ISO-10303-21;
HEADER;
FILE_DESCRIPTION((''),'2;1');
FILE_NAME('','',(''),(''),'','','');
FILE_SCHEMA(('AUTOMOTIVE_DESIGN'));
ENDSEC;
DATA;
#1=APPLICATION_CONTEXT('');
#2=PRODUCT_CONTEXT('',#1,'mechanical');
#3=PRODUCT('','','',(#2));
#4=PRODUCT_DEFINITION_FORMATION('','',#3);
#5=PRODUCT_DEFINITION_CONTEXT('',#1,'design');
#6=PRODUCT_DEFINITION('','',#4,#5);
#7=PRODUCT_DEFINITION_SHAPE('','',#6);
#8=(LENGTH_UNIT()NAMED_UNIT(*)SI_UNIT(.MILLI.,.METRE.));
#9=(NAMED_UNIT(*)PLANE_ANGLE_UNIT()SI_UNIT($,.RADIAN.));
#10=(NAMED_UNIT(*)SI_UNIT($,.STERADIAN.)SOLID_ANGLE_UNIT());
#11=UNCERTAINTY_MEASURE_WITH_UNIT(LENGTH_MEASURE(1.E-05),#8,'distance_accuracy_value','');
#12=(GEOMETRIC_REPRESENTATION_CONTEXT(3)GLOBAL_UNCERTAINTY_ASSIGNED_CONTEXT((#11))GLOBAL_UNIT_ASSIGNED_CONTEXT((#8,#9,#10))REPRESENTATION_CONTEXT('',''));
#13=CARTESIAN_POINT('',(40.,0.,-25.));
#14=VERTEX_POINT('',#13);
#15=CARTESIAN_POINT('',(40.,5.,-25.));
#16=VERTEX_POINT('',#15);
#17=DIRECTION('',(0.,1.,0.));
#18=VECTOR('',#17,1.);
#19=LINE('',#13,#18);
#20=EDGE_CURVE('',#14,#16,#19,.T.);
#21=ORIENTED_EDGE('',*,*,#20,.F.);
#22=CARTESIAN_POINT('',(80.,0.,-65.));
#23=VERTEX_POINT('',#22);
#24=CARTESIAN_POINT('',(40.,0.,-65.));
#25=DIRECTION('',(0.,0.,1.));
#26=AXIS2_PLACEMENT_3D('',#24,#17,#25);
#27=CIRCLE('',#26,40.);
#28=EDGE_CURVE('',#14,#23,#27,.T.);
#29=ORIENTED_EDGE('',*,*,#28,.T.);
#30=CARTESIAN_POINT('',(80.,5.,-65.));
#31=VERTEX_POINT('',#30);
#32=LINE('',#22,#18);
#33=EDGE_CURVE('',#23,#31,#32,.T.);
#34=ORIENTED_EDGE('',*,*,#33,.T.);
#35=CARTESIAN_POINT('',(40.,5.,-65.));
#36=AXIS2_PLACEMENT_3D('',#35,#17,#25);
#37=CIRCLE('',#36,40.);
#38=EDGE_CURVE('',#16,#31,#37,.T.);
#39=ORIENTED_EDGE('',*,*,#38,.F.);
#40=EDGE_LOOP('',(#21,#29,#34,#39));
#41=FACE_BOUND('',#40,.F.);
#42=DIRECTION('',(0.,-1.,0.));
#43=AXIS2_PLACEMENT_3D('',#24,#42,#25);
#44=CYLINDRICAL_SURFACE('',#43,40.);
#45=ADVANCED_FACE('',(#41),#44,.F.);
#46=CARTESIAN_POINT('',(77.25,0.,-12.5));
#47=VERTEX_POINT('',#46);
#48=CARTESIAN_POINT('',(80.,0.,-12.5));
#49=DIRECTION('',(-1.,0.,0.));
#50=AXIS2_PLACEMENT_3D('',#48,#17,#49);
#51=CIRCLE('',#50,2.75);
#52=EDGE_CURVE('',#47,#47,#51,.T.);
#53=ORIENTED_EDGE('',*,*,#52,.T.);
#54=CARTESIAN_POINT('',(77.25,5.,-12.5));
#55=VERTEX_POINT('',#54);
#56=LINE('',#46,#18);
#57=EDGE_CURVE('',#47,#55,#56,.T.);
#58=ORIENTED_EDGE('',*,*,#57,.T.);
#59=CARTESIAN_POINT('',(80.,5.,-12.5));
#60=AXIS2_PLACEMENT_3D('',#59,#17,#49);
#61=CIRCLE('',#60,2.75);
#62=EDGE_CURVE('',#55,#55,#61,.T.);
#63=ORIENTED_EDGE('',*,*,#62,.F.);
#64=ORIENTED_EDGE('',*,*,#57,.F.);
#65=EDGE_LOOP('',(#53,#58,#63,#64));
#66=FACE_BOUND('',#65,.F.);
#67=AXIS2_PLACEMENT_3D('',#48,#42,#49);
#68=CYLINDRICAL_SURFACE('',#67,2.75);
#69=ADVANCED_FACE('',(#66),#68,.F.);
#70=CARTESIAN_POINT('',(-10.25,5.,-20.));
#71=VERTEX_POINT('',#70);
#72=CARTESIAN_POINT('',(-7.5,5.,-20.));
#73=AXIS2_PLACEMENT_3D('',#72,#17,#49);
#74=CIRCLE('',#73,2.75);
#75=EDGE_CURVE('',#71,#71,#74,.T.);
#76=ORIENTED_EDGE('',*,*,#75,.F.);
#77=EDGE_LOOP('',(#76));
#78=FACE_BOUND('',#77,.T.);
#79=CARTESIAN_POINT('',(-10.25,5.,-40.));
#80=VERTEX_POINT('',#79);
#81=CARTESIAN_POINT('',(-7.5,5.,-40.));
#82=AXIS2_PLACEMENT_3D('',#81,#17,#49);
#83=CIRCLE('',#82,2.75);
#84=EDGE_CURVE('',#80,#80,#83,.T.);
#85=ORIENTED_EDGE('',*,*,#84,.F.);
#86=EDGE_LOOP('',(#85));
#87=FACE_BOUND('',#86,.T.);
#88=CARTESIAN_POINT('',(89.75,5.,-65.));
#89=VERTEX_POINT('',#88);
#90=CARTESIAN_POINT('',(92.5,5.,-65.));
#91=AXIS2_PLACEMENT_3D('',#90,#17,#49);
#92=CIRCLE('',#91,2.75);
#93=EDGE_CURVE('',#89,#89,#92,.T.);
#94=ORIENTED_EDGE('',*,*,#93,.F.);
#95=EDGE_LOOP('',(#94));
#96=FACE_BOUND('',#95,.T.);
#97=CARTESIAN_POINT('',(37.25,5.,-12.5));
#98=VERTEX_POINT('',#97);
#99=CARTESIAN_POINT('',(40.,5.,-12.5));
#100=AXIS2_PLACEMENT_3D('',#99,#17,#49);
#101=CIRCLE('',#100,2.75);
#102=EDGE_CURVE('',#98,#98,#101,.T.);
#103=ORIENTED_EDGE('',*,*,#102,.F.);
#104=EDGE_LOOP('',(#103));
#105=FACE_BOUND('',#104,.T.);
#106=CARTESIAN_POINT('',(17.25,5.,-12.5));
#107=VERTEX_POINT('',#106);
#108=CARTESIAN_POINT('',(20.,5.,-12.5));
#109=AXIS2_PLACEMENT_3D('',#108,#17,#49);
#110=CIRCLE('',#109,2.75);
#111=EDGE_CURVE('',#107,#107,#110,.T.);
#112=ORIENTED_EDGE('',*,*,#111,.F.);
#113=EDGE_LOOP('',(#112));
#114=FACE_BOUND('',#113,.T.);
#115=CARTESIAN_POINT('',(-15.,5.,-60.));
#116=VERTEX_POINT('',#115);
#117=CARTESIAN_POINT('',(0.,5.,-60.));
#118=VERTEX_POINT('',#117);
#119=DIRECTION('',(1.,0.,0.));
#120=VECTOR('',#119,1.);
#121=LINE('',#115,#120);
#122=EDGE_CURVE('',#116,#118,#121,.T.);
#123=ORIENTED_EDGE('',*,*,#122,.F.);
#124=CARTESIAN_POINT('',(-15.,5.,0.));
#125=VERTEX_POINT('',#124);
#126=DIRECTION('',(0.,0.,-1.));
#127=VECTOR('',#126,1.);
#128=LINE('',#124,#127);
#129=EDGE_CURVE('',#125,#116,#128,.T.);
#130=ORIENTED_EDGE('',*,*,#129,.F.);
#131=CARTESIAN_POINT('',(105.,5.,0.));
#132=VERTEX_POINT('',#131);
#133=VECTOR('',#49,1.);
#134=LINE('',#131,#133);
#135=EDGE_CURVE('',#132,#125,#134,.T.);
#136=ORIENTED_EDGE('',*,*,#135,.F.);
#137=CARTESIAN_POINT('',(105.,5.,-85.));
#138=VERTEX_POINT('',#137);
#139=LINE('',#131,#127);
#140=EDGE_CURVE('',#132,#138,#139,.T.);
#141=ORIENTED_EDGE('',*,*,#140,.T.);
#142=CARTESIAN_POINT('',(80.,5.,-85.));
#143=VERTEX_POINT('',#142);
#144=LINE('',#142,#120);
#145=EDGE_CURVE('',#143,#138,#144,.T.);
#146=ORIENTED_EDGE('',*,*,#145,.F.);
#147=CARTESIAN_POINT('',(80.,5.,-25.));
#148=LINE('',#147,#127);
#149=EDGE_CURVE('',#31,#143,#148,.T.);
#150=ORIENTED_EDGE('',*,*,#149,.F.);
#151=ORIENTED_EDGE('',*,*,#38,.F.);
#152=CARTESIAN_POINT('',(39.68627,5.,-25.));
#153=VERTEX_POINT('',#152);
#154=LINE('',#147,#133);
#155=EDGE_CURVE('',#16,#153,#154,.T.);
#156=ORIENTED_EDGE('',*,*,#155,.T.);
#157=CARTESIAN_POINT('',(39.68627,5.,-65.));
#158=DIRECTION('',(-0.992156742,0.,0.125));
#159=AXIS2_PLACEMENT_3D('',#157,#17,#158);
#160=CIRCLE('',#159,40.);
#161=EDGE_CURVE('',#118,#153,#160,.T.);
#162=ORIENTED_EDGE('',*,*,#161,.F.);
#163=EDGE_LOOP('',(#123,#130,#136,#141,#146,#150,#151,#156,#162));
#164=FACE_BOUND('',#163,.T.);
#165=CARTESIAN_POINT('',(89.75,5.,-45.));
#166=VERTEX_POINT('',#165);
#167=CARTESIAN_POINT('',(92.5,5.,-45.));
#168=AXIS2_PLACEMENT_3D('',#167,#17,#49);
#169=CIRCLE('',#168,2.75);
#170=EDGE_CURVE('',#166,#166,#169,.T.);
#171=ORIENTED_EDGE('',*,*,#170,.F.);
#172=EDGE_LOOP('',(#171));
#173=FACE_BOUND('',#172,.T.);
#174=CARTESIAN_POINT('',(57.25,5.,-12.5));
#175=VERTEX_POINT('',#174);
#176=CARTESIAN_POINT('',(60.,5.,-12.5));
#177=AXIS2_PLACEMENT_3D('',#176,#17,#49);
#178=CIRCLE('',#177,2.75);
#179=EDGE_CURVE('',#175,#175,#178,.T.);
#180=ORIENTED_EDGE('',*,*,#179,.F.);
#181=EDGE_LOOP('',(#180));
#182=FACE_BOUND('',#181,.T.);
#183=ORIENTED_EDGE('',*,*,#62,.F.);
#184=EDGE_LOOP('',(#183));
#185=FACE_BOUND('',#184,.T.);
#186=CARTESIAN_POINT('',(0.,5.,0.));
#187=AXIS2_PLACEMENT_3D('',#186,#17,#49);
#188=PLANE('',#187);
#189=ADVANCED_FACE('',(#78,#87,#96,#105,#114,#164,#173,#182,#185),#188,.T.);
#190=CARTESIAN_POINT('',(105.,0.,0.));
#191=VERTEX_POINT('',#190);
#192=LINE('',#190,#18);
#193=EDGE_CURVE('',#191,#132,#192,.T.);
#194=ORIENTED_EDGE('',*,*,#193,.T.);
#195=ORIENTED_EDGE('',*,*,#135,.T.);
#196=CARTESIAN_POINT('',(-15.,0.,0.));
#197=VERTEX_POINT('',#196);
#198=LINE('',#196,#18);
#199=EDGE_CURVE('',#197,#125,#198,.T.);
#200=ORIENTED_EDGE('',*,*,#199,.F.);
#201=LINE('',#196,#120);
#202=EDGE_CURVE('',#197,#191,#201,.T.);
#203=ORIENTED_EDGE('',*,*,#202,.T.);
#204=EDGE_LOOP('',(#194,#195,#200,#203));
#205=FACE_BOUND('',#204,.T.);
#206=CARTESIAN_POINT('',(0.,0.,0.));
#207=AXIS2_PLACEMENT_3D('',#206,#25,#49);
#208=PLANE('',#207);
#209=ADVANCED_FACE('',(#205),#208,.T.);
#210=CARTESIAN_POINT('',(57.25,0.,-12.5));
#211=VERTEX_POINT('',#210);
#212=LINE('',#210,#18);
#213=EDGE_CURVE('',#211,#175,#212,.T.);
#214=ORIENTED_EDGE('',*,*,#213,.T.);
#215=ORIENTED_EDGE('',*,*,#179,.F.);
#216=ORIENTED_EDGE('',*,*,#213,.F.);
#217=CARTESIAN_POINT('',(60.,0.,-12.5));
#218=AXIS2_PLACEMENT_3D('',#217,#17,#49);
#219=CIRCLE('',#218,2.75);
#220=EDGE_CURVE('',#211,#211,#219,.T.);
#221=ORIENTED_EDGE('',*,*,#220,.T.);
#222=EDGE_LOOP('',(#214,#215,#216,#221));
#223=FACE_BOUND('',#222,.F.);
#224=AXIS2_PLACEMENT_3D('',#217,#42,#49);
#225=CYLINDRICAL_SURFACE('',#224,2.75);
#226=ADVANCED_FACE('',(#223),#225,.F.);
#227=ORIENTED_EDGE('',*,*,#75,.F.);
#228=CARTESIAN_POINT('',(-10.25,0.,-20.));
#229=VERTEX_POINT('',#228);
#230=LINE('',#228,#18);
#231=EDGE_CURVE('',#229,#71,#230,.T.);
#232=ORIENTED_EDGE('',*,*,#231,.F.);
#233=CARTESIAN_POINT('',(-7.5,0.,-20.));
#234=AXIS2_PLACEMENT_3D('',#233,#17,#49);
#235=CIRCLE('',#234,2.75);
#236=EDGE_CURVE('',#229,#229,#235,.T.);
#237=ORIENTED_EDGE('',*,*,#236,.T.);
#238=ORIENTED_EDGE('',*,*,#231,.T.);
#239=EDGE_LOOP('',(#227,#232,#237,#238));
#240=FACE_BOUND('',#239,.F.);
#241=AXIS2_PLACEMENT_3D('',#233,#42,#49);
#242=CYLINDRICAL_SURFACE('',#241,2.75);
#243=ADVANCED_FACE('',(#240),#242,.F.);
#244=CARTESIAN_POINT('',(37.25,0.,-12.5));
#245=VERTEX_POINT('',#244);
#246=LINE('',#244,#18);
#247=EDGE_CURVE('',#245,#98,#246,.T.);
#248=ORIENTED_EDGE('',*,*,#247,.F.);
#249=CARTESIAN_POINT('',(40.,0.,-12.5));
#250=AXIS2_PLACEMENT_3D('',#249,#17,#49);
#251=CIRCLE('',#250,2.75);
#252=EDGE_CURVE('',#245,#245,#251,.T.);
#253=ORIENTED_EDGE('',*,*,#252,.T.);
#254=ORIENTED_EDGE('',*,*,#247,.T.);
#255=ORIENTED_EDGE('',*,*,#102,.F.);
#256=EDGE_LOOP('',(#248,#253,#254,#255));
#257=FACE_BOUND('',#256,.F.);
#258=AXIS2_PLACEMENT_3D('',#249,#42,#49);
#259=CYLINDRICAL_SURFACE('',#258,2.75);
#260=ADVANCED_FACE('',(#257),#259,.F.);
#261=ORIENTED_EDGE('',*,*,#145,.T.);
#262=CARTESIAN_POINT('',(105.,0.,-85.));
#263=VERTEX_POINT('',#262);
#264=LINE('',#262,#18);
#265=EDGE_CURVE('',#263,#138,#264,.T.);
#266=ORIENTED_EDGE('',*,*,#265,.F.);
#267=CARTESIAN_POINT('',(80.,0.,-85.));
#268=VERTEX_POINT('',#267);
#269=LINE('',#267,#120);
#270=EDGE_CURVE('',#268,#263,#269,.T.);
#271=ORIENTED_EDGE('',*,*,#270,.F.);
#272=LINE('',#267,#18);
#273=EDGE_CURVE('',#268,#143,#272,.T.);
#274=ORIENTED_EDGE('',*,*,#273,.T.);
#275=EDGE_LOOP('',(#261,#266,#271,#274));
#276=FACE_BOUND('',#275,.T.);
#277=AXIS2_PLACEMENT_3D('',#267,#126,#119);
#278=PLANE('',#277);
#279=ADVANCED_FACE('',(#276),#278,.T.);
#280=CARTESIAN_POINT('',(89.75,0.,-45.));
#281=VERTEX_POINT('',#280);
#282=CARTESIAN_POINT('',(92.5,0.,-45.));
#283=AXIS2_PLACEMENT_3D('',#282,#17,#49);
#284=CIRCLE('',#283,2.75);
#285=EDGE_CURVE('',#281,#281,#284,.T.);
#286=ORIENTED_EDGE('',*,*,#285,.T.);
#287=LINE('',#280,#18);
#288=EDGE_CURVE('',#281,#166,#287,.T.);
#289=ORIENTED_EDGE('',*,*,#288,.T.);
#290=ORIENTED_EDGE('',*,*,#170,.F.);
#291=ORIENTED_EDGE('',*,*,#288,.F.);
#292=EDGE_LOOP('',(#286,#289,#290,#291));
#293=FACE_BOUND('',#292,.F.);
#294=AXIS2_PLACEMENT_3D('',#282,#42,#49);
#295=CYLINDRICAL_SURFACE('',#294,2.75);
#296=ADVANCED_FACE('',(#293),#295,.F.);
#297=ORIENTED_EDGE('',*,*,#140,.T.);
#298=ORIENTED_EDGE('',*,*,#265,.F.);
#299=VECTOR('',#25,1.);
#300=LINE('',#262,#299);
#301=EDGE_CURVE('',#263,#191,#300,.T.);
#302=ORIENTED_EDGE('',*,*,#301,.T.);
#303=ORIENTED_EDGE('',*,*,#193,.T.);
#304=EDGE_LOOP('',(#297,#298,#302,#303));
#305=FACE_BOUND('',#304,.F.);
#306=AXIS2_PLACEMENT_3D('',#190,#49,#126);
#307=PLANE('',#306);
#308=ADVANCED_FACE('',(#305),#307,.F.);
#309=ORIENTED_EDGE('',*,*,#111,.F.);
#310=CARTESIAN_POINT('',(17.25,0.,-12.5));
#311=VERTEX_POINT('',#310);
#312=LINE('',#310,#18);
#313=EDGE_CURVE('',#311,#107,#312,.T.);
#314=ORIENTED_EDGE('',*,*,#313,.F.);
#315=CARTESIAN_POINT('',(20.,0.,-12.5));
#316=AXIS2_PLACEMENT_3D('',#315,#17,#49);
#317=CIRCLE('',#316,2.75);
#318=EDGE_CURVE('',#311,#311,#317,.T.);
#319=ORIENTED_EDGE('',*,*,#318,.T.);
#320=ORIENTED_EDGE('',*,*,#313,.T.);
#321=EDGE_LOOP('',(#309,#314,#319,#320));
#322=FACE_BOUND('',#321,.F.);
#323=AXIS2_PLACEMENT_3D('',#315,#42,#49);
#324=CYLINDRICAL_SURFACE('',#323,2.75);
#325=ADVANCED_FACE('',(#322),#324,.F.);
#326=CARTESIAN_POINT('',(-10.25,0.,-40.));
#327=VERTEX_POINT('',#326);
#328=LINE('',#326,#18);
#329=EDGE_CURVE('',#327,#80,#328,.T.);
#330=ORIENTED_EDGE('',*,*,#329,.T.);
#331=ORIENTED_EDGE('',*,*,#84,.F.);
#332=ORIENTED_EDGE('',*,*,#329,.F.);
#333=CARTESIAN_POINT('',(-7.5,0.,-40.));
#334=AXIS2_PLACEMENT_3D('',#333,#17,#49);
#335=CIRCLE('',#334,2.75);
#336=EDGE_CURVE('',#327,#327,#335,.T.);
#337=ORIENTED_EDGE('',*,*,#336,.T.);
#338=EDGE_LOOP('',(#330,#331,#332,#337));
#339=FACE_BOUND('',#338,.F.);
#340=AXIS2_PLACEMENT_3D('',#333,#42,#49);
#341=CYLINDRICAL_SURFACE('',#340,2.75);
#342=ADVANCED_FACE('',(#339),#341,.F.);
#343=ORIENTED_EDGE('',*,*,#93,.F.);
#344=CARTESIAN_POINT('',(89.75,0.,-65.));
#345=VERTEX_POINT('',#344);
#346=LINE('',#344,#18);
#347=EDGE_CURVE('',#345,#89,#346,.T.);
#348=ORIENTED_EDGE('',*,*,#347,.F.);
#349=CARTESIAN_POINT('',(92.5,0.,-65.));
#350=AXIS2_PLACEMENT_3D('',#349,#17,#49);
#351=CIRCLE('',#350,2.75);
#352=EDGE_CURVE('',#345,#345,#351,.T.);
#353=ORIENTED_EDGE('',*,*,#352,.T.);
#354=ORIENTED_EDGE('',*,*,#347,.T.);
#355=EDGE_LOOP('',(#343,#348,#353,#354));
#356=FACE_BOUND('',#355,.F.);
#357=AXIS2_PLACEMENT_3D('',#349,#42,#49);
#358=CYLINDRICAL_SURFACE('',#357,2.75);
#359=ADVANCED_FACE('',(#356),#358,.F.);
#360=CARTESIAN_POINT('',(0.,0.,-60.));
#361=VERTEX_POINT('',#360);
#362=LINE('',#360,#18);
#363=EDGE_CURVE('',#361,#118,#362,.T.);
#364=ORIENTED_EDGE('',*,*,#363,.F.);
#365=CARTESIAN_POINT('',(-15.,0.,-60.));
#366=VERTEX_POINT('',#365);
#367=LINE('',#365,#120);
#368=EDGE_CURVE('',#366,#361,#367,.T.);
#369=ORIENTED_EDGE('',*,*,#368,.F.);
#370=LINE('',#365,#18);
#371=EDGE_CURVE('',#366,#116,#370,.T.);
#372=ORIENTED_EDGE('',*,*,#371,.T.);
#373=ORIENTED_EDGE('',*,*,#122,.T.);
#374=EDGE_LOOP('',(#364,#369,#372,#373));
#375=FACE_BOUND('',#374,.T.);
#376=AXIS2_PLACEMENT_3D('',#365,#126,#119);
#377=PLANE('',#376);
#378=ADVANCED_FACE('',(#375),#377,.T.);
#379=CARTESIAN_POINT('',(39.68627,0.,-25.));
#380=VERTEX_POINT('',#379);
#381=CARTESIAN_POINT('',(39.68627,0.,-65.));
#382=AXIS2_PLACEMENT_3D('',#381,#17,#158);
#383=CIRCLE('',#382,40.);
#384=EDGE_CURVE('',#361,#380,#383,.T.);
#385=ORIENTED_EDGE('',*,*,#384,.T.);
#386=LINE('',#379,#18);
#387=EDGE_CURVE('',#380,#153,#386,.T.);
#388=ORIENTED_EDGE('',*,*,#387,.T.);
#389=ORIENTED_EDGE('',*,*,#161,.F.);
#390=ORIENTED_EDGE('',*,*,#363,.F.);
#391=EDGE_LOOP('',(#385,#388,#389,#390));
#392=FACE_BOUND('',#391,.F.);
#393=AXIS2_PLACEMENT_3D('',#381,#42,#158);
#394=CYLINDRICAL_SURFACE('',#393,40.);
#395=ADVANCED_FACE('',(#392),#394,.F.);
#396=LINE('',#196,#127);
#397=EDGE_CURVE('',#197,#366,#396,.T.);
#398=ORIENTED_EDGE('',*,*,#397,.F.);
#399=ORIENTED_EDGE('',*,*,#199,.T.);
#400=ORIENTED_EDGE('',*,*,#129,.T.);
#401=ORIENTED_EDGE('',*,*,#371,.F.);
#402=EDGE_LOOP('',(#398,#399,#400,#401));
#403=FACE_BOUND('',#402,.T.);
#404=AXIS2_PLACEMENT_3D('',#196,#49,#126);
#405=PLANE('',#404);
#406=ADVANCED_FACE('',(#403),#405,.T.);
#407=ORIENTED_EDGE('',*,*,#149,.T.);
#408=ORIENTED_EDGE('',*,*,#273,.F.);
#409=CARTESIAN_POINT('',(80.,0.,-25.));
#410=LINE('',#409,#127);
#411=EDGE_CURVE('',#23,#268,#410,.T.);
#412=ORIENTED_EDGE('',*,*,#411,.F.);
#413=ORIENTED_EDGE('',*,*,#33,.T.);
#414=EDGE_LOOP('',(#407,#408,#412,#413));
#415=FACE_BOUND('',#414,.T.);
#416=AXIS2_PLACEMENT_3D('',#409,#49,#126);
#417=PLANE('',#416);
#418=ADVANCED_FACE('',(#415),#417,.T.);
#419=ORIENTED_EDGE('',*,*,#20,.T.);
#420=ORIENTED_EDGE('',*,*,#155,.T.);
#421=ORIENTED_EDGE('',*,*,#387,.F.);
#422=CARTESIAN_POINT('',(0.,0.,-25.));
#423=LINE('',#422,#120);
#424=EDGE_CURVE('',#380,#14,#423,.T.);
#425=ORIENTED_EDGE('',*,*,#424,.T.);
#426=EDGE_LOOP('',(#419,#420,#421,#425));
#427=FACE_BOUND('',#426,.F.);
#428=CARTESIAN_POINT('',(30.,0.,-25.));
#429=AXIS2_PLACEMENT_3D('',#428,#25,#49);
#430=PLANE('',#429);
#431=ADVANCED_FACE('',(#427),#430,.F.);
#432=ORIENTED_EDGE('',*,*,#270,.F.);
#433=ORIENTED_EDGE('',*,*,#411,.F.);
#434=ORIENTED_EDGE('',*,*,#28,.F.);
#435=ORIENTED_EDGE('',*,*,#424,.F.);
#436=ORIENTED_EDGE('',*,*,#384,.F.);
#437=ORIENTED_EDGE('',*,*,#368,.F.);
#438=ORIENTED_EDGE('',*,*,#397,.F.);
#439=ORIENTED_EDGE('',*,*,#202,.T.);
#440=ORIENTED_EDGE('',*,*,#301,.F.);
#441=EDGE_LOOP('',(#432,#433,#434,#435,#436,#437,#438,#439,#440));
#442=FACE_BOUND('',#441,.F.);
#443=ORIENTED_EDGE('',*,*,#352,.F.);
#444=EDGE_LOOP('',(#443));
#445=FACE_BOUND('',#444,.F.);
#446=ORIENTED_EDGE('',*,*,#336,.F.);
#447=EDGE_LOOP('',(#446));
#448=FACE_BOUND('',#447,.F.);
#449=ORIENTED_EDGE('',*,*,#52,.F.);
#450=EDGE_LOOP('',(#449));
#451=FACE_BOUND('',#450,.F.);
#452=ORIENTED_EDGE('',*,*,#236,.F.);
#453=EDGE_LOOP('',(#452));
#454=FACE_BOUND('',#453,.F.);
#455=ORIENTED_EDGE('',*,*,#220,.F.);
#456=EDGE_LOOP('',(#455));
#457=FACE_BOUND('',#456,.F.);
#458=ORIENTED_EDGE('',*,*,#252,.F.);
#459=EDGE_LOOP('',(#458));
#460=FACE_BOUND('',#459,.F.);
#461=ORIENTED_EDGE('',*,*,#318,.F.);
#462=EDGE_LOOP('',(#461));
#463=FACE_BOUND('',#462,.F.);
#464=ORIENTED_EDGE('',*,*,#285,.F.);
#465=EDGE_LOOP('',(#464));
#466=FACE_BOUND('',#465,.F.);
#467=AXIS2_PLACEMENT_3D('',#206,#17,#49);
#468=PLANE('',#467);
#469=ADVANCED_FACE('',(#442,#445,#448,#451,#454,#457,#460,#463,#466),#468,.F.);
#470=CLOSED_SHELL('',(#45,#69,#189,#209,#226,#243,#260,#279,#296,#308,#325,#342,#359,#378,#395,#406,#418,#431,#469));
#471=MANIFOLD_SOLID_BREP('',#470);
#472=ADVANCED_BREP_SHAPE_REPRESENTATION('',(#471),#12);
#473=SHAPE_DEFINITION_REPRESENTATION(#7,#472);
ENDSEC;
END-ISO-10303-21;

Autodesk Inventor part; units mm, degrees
ref_plane "YZ Plane" through (0, 0, 0) normal (1, 0, 0) x (0, 1, 0)
ref_plane "XZ Plane" through (0, 0, 0) normal (0, 1, 0) x (-1, 0, 0)
ref_plane "XY Plane" through (0, 0, 0) normal (0, 0, 1) x (1, 0, 0)
sketch "Sketch1" plane through (0, 0, 0) normal (0, 1, 0) x (-1, 0, 0)
  line L0 (0, 0) -> (15, 0)
  line L1 (15, 0) -> (15, -60)
  line L2 (15, -60) -> (0, -60)
  line L3 (0, -60) -> (0, 0)
  circle A0 centre (7.5, -40) radius 2.75
  line L4 (0, 0) -> (-105, 0)
  line L5 (-105, 0) -> (-105, -25)
  line L6 (-105, -25) -> (0, -25)
  line L7 (0, -25) -> (0, 0)
  line L8 (-105, -25) -> (-80, -25)
  line L9 (-80, -25) -> (-80, -85)
  line L10 (-80, -85) -> (-105, -85)
  line L11 (-105, -85) -> (-105, -25)
  circle A1 centre (7.5, -20) radius 2.75
  circle A2 centre (-20, -12.5) radius 2.75
  circle A3 centre (-40, -12.5) radius 2.75
  circle A4 centre (-60, -12.5) radius 2.75
  circle A5 centre (-80, -12.5) radius 2.75
  circle A6 centre (-92.5, -45) radius 2.75
  circle A7 centre (-92.5, -65) radius 2.75
  line L12 (-30, -25) -> (-30, 0)
  dimension "d0" = 15
  dimension "d1" = 60
  dimension "d2" = 5.5
  dimension "d3" = 40
  dimension "d4" = 7.5
  dimension "d5" = 105
  dimension "d6" = 25
  dimension "d7" = 60
  dimension "d8" = 25
  dimension "d9" = 5.5
  dimension "d10" = 7.5
  dimension "d11" = 20
  dimension "d12" = 5.5
  dimension "d13" = 12.5
  dimension "d14" = 20
  dimension "d17" = 20
  dimension "d22" = 5.5
  dimension "d23" = 5.5
  dimension "d24" = 12.5
  dimension "d25" = 12.5
  dimension "d26" = 20
  dimension "d27" = 20
  dimension "d31" = 10
extrude "Extrusion1" add sketch "Sketch1" along normal blind 5
fillet "Fillet1" radius 40 2 edges at (80, 2.5, -25) (0, 2.5, -25)
properties part number "Brace" material "Aluminum 6061"
